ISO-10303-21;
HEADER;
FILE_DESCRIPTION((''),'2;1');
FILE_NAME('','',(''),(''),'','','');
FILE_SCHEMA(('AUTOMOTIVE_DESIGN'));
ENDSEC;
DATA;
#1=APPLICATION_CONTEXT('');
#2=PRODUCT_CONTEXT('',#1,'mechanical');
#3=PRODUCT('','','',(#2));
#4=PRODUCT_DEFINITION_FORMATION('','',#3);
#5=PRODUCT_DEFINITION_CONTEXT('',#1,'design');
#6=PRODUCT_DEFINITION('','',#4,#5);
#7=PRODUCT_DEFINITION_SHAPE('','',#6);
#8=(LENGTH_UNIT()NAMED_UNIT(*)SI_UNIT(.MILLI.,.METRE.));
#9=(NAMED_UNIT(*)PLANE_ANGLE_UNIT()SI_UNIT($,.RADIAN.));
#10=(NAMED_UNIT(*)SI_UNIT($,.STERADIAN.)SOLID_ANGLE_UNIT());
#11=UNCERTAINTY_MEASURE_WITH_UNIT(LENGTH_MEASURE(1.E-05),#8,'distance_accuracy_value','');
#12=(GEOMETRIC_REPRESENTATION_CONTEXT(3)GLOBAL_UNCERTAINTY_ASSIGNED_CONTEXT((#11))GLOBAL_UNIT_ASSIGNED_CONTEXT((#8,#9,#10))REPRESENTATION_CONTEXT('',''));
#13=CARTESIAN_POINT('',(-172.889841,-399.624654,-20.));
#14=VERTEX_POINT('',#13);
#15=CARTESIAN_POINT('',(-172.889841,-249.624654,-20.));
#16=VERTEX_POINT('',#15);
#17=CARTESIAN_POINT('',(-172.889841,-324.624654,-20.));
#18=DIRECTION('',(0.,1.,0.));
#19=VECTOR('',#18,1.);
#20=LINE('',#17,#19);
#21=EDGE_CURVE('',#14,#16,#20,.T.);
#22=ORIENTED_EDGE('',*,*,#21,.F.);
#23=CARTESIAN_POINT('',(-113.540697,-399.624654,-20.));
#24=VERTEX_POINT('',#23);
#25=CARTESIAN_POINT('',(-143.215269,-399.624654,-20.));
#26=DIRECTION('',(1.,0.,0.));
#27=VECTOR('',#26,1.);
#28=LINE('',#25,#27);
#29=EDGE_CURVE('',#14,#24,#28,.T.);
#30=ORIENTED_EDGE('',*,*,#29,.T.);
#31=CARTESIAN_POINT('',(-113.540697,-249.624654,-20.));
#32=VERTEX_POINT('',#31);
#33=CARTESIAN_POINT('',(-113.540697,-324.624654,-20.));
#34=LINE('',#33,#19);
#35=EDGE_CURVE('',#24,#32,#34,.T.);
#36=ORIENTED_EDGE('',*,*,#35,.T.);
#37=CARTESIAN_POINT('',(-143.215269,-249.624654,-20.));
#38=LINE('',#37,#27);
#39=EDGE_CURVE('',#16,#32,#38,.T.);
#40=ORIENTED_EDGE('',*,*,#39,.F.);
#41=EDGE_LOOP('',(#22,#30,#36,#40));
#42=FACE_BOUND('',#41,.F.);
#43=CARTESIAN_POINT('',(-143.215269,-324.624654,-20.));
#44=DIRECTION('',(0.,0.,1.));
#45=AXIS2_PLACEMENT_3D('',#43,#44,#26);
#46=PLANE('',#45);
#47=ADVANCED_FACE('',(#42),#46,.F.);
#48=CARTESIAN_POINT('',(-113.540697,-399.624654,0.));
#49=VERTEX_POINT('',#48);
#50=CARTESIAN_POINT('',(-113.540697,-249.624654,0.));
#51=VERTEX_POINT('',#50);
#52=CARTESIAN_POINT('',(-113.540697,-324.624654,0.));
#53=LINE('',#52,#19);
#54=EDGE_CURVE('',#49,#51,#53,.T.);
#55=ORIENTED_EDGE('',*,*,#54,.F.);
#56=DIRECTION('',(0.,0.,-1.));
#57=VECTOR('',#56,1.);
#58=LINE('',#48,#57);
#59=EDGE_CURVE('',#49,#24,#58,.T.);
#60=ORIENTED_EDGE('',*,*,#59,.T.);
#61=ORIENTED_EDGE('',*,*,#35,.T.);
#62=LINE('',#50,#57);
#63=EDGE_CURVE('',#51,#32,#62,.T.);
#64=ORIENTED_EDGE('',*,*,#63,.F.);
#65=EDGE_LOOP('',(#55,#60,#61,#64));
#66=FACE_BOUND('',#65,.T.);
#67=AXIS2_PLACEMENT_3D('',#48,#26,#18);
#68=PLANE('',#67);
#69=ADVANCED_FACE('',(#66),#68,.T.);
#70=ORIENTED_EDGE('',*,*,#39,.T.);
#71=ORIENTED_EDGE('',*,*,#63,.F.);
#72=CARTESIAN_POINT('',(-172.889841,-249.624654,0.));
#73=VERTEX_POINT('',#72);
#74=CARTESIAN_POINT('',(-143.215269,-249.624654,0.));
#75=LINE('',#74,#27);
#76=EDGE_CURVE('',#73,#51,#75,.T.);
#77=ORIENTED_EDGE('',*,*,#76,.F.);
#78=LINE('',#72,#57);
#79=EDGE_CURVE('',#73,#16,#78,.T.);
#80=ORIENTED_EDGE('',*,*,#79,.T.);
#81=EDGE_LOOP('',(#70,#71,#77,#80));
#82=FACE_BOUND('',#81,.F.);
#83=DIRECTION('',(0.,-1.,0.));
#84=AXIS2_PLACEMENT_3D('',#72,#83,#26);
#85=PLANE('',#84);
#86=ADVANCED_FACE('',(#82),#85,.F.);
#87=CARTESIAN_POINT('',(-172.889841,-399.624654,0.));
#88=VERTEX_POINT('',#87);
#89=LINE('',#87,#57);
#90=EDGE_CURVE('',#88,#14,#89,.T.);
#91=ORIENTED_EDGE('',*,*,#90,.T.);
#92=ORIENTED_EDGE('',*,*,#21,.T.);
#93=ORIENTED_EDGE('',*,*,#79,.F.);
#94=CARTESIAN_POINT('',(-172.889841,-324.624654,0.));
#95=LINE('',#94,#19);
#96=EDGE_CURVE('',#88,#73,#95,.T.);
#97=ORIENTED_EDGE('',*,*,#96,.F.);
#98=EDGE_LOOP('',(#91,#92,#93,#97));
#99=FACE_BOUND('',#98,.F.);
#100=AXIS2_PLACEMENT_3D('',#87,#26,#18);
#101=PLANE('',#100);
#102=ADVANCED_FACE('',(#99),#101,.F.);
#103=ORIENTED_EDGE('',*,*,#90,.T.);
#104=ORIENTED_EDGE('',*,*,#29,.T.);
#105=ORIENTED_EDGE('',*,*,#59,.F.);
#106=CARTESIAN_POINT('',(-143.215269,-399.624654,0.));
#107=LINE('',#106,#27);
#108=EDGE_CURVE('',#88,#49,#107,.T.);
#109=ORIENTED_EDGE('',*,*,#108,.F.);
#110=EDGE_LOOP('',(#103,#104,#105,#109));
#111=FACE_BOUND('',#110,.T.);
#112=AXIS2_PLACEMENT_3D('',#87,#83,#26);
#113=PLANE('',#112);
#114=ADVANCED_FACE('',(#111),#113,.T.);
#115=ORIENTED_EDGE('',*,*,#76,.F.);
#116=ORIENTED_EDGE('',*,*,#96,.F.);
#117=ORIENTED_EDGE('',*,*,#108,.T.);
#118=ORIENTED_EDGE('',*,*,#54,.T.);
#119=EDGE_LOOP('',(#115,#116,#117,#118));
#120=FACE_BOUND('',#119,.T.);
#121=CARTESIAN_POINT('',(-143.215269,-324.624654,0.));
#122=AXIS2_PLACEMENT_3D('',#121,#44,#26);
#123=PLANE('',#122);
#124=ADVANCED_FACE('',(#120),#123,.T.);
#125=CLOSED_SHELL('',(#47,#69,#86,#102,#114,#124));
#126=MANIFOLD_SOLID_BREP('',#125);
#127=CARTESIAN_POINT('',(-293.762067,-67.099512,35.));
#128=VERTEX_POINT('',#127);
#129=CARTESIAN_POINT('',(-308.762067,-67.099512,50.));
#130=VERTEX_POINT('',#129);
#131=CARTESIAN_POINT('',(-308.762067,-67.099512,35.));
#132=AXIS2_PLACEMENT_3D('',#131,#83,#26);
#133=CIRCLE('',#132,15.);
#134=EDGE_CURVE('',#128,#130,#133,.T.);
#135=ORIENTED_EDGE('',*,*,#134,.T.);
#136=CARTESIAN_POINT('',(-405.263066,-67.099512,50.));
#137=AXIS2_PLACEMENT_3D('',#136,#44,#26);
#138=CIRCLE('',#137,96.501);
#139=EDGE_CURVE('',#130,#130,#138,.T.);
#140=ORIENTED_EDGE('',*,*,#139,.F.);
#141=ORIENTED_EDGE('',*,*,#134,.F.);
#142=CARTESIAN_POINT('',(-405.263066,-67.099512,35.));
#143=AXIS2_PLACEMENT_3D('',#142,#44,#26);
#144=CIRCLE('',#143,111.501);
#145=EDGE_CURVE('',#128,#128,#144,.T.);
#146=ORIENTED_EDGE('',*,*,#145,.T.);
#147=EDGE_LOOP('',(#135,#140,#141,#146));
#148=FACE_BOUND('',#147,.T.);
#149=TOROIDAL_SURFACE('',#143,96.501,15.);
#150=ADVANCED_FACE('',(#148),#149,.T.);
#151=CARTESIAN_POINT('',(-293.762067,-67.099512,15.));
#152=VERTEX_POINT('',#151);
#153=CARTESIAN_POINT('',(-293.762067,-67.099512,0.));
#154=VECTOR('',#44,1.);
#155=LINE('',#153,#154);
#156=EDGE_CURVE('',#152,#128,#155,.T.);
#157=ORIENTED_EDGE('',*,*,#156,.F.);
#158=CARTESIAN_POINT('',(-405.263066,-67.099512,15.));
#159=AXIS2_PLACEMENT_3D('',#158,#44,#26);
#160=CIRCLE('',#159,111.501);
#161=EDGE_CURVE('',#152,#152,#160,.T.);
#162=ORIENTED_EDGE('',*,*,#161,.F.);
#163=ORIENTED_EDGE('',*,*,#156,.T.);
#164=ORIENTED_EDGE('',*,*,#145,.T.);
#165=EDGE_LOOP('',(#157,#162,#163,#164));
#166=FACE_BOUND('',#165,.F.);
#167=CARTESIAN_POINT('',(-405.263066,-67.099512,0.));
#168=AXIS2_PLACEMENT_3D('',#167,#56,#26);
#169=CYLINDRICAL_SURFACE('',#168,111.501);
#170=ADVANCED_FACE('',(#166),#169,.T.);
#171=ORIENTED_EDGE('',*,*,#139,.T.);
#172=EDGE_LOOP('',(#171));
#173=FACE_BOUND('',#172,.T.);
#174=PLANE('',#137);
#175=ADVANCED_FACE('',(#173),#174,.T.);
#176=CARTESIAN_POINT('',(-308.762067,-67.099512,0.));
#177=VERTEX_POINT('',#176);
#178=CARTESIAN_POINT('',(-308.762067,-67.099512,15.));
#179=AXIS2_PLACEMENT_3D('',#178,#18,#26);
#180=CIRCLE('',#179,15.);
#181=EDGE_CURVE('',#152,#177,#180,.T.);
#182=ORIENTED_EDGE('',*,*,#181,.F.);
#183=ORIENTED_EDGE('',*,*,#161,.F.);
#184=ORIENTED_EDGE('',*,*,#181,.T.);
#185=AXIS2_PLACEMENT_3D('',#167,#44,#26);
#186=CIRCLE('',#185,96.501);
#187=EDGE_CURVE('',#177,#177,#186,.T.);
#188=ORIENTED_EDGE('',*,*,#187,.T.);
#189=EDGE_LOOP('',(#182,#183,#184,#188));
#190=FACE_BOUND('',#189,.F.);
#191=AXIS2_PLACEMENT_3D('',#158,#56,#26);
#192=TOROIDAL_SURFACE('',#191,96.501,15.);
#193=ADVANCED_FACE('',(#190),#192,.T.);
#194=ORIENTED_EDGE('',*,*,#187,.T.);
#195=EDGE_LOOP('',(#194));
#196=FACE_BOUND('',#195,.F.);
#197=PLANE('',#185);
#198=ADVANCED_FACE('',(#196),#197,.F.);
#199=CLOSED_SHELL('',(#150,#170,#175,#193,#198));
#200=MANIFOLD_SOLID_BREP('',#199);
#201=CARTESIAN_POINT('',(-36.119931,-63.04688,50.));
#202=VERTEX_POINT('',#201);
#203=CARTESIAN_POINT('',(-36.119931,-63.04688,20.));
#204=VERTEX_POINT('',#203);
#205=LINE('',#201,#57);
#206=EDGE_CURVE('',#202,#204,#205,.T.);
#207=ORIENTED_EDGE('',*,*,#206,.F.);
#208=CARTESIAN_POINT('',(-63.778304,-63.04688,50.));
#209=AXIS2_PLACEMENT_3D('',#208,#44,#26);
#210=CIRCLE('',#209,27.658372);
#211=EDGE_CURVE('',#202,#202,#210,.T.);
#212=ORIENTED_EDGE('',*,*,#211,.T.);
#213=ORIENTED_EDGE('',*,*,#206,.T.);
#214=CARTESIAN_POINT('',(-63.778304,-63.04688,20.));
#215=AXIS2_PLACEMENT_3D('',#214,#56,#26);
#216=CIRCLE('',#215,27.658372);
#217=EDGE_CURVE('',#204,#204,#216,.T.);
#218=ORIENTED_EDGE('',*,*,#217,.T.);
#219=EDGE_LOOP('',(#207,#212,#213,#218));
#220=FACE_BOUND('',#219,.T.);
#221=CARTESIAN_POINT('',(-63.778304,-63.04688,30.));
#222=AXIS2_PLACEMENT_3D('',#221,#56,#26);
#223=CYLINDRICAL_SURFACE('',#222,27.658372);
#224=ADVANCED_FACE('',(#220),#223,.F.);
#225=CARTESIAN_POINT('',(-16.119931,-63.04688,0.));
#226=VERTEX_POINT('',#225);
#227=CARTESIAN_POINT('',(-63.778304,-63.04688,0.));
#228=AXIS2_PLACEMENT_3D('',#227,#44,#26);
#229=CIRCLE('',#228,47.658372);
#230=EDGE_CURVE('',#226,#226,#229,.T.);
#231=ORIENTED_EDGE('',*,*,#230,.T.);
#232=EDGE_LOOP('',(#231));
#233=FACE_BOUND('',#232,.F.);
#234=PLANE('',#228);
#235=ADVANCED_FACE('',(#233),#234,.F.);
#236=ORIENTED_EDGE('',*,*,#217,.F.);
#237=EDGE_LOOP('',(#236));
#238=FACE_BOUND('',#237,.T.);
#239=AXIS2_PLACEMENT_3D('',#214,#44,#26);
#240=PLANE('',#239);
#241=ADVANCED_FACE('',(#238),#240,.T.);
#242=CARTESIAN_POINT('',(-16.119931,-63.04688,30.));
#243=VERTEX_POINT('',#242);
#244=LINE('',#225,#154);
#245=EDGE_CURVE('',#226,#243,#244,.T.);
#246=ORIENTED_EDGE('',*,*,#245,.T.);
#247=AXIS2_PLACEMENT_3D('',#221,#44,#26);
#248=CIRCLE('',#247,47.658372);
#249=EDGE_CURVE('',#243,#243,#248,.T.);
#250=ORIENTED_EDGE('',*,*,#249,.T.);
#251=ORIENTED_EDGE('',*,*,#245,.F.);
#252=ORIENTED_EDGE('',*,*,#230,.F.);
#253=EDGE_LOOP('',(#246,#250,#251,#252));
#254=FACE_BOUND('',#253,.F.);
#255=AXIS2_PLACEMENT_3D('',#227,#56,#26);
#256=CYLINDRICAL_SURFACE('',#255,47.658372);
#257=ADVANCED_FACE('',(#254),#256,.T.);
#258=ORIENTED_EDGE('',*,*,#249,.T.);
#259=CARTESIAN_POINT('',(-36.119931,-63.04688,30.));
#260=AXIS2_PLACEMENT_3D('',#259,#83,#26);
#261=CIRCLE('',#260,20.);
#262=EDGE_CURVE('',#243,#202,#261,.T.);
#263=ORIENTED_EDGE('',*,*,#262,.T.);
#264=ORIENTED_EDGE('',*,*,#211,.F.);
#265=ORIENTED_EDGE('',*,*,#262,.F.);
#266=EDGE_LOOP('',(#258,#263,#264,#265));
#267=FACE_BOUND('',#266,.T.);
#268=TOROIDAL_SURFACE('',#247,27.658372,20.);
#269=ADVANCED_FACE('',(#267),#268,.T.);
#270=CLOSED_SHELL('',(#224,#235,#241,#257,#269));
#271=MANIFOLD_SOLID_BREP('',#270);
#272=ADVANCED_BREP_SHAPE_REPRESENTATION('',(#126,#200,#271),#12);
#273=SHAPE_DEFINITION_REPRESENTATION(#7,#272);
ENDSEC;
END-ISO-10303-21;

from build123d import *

# Parameters (mm, degrees)
F0_W     = 59.3491444241
F0_H     = 150
F1_DEPTH = 20
F2_R     = 47.6583720873
F3_DEPTH = 50
F4_R     = 20
F5_T     = -20
F6_R     = 111.5009996007
F7_DEPTH = 50
F8_R     = 15
F9_R     = 15


# Not quite as in the source:
# - a shell that OpenCascade refuses in one call is made with other operations: the cavity is built on its own and cut out


with BuildPart() as f1:
    # F0 (on Top) → F1 (new body)
    with BuildSketch(Plane.XY):
        with Locations((-143.2152688503, -324.6246539056)):
            Rectangle(F0_W, F0_H)
    extrude(amount=-F1_DEPTH)


with BuildPart() as f3:
    # F2 (on Top) → F3 (new body)
    with BuildSketch(Plane.XY):
        with Locations((-63.7783035636, -63.0468800664)):
            Circle(F2_R)
    extrude(amount=F3_DEPTH)

    # F4
    f4_edges = [f3.edges().sort_by_distance(p)[0] for p in [
        (-111.436676, -63.04688, 50),
    ]]
    fillet(f4_edges, radius=F4_R)

    # F5: a shell. OpenCascade refuses it in one call, so the cavity is built on its own and cut out:
    # the body offset inwards by the wall thickness, plus a prism from it out through each open face.
    f5_core = offset(f3.part, amount=F5_T, kind=Kind.INTERSECTION, mode=Mode.PRIVATE)
    f5_exits = [f5_core.faces().sort_by_distance(p)[0] for p in [
        (-63.778304, -63.04688, 30),
    ]]
    add(f5_core, mode=Mode.SUBTRACT)
    extrude(f5_exits, amount=-F5_T, mode=Mode.SUBTRACT)


with BuildPart() as f7:
    # F6 (on Top) → F7 (new body)
    with BuildSketch(Plane.XY):
        with Locations((-405.2630662918, -67.0995116234)):
            Circle(F6_R)
    extrude(amount=F7_DEPTH)

    # F8
    f8_edges = [f7.edges().sort_by_distance(p)[0] for p in [
        (-516.764066, -67.099512, 50),
    ]]
    fillet(f8_edges, radius=F8_R)

    # F9
    f9_edges = [f7.edges().sort_by_distance(p)[0] for p in [
        (-516.764066, -67.099512, 0),
    ]]
    fillet(f9_edges, radius=F9_R)


solid = Compound([f1.part, f3.part, f7.part])
